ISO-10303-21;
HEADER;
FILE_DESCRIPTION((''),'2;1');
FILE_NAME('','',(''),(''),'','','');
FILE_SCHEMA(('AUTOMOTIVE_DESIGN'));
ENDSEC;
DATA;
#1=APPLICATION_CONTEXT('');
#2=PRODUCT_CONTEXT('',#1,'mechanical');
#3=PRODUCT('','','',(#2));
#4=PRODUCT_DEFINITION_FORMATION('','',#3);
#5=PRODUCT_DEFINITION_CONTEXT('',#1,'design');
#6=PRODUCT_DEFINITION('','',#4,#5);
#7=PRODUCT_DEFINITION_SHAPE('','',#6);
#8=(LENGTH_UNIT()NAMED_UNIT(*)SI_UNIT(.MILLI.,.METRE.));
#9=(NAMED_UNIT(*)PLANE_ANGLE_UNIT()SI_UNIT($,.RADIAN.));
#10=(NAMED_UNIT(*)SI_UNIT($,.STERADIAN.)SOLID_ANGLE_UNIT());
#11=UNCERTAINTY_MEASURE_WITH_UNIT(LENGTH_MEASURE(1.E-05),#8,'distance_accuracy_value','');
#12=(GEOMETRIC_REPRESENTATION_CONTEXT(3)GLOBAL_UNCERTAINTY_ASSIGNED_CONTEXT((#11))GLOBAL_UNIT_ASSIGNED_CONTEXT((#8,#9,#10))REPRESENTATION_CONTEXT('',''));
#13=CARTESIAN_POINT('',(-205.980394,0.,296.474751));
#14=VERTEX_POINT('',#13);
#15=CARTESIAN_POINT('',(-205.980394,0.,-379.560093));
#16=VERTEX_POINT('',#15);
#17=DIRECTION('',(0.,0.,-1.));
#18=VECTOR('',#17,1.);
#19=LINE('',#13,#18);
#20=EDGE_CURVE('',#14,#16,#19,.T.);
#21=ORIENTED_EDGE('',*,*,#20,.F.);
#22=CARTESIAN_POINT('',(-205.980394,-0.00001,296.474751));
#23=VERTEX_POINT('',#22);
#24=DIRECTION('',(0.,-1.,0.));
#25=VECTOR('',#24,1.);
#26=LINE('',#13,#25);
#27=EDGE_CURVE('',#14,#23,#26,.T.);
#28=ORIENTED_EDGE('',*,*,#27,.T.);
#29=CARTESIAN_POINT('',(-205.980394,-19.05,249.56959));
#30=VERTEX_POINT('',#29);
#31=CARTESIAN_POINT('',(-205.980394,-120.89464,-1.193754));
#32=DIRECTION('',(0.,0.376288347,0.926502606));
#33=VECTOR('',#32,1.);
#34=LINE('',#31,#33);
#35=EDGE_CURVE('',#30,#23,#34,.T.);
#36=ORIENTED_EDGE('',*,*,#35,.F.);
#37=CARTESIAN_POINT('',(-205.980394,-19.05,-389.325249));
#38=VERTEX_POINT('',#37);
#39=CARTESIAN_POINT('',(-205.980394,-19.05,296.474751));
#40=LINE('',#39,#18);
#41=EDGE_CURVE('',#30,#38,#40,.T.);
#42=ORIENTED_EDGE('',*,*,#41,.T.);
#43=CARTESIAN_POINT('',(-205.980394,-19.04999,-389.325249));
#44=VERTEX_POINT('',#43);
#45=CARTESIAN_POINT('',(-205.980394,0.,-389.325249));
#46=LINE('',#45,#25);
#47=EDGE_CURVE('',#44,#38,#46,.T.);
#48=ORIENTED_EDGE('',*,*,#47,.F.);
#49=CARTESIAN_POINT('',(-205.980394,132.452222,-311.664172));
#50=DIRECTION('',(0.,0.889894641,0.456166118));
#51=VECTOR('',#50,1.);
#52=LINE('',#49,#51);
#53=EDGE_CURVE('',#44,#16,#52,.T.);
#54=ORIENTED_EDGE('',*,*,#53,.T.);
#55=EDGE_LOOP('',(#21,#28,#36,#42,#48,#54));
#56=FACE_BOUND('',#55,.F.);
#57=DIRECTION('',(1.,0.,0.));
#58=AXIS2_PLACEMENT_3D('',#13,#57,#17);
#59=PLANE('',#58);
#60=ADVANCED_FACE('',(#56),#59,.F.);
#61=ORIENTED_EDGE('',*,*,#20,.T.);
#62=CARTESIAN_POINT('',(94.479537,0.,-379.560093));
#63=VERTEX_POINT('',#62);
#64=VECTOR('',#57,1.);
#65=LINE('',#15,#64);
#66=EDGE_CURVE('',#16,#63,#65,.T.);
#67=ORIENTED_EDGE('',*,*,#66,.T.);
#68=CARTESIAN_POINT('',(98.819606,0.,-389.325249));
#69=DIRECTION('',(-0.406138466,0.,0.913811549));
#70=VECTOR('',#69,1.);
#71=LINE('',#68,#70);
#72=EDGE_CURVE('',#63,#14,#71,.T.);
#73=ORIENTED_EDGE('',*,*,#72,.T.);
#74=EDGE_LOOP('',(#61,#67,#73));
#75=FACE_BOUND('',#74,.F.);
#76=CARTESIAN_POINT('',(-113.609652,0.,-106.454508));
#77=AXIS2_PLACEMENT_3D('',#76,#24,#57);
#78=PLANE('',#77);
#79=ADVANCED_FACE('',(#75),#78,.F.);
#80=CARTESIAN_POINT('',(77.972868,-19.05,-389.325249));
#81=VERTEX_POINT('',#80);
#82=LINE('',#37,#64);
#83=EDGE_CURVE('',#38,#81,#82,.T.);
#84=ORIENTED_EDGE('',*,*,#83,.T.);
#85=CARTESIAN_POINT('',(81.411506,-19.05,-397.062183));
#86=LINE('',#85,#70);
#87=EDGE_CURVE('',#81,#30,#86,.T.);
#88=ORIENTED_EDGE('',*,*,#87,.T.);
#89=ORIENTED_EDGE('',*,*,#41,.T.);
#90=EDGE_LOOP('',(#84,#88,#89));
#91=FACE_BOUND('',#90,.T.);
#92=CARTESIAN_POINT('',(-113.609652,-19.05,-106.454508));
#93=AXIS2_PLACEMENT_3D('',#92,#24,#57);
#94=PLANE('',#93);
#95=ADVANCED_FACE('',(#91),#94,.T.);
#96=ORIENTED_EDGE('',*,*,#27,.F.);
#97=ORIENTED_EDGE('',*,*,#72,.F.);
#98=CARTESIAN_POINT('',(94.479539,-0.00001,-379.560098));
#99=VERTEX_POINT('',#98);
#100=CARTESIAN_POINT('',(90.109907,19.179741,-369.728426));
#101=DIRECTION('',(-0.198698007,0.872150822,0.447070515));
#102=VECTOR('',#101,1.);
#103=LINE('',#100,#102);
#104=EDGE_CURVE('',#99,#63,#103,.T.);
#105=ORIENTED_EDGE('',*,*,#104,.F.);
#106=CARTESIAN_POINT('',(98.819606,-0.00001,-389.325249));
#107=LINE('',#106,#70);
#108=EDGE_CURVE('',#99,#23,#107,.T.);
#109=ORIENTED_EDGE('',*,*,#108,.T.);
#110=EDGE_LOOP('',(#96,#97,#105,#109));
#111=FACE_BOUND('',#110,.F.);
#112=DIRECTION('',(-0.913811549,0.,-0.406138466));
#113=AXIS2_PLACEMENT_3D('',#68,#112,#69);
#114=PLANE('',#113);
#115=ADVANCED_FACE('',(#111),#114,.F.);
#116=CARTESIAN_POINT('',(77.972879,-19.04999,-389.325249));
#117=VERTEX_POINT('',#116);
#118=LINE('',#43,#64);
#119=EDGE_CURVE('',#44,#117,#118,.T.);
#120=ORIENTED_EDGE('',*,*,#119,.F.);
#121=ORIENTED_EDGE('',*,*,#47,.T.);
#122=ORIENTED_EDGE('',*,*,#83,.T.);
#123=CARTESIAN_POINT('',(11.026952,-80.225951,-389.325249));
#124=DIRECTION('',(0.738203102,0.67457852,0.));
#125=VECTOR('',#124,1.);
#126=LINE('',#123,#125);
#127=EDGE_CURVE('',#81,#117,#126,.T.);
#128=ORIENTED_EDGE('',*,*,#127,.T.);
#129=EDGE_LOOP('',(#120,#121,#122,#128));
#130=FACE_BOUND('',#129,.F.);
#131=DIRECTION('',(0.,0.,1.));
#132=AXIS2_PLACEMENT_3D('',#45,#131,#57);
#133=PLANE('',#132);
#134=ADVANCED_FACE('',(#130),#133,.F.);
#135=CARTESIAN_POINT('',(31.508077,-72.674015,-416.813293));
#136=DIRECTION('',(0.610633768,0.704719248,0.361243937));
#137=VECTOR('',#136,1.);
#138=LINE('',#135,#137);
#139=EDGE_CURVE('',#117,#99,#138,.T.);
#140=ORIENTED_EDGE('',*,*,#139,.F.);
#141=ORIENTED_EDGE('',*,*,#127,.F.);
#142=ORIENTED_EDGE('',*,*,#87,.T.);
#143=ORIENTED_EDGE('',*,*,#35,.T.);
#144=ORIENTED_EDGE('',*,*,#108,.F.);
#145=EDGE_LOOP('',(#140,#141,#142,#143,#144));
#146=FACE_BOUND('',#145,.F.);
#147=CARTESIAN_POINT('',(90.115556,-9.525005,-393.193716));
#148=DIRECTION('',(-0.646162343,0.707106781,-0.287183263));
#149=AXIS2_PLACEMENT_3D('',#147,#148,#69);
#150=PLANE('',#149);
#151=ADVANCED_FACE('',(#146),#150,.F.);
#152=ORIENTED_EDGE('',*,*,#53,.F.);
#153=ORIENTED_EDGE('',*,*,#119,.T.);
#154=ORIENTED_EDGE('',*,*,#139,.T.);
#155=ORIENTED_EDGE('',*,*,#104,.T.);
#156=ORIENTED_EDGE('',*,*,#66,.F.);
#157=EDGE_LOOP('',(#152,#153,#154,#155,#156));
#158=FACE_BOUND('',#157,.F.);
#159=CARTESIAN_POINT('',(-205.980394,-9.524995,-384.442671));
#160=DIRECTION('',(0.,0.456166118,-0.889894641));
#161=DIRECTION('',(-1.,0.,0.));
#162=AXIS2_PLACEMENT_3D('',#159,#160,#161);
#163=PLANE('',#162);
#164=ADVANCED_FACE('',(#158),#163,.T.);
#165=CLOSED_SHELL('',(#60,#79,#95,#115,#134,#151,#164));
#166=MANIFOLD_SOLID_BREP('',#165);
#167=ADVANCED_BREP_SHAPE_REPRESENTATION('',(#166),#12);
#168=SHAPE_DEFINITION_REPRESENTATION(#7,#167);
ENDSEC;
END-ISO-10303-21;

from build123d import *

# Parameters (mm, degrees)
F1_DEPTH = 19.05
F2_SIZE2 = 9.765156
F2_SIZE  = 19.04999
F3_SIZE2 = 19.04999
F3_SIZE  = 19.04999


# Not quite as in the source:
# - a fillet or chamfer is up to 0.001 mm smaller than in the source, because OpenCascade refuses the exact size


with BuildPart() as f1:
    # F0 (on Front) → F1 (new body)
    with BuildSketch(Plane.XZ):
        Polygon((-205.980393503, 296.4747510433), (-205.980393503, -389.3252489567), (98.819606497, -389.3252489567), align=None)
    extrude(amount=F1_DEPTH)

    # F2 (size 19.05 and 9.7651655461 in the source; OpenCascade refuses exactly that, so slightly less here)
    f2_edges = [f1.edges().sort_by_distance(p)[0] for p in [
        (-53.580394, 0, -389.325249),
    ]]
    f2_side = f1.faces().sort_by_distance((-53.580394, -9.525, -389.325249))[0]
    chamfer(f2_edges, length=F2_SIZE, length2=F2_SIZE2, reference=f2_side)

    # F3 (size 19.05 and 19.05 in the source; OpenCascade refuses exactly that, so slightly less here)
    f3_edges = [f1.edges().sort_by_distance(p)[0] for p in [
        (-53.580394, -19.05, -46.425249),
    ]]
    chamfer(f3_edges, length=F3_SIZE, length2=F3_SIZE2)


solid = f1.part
